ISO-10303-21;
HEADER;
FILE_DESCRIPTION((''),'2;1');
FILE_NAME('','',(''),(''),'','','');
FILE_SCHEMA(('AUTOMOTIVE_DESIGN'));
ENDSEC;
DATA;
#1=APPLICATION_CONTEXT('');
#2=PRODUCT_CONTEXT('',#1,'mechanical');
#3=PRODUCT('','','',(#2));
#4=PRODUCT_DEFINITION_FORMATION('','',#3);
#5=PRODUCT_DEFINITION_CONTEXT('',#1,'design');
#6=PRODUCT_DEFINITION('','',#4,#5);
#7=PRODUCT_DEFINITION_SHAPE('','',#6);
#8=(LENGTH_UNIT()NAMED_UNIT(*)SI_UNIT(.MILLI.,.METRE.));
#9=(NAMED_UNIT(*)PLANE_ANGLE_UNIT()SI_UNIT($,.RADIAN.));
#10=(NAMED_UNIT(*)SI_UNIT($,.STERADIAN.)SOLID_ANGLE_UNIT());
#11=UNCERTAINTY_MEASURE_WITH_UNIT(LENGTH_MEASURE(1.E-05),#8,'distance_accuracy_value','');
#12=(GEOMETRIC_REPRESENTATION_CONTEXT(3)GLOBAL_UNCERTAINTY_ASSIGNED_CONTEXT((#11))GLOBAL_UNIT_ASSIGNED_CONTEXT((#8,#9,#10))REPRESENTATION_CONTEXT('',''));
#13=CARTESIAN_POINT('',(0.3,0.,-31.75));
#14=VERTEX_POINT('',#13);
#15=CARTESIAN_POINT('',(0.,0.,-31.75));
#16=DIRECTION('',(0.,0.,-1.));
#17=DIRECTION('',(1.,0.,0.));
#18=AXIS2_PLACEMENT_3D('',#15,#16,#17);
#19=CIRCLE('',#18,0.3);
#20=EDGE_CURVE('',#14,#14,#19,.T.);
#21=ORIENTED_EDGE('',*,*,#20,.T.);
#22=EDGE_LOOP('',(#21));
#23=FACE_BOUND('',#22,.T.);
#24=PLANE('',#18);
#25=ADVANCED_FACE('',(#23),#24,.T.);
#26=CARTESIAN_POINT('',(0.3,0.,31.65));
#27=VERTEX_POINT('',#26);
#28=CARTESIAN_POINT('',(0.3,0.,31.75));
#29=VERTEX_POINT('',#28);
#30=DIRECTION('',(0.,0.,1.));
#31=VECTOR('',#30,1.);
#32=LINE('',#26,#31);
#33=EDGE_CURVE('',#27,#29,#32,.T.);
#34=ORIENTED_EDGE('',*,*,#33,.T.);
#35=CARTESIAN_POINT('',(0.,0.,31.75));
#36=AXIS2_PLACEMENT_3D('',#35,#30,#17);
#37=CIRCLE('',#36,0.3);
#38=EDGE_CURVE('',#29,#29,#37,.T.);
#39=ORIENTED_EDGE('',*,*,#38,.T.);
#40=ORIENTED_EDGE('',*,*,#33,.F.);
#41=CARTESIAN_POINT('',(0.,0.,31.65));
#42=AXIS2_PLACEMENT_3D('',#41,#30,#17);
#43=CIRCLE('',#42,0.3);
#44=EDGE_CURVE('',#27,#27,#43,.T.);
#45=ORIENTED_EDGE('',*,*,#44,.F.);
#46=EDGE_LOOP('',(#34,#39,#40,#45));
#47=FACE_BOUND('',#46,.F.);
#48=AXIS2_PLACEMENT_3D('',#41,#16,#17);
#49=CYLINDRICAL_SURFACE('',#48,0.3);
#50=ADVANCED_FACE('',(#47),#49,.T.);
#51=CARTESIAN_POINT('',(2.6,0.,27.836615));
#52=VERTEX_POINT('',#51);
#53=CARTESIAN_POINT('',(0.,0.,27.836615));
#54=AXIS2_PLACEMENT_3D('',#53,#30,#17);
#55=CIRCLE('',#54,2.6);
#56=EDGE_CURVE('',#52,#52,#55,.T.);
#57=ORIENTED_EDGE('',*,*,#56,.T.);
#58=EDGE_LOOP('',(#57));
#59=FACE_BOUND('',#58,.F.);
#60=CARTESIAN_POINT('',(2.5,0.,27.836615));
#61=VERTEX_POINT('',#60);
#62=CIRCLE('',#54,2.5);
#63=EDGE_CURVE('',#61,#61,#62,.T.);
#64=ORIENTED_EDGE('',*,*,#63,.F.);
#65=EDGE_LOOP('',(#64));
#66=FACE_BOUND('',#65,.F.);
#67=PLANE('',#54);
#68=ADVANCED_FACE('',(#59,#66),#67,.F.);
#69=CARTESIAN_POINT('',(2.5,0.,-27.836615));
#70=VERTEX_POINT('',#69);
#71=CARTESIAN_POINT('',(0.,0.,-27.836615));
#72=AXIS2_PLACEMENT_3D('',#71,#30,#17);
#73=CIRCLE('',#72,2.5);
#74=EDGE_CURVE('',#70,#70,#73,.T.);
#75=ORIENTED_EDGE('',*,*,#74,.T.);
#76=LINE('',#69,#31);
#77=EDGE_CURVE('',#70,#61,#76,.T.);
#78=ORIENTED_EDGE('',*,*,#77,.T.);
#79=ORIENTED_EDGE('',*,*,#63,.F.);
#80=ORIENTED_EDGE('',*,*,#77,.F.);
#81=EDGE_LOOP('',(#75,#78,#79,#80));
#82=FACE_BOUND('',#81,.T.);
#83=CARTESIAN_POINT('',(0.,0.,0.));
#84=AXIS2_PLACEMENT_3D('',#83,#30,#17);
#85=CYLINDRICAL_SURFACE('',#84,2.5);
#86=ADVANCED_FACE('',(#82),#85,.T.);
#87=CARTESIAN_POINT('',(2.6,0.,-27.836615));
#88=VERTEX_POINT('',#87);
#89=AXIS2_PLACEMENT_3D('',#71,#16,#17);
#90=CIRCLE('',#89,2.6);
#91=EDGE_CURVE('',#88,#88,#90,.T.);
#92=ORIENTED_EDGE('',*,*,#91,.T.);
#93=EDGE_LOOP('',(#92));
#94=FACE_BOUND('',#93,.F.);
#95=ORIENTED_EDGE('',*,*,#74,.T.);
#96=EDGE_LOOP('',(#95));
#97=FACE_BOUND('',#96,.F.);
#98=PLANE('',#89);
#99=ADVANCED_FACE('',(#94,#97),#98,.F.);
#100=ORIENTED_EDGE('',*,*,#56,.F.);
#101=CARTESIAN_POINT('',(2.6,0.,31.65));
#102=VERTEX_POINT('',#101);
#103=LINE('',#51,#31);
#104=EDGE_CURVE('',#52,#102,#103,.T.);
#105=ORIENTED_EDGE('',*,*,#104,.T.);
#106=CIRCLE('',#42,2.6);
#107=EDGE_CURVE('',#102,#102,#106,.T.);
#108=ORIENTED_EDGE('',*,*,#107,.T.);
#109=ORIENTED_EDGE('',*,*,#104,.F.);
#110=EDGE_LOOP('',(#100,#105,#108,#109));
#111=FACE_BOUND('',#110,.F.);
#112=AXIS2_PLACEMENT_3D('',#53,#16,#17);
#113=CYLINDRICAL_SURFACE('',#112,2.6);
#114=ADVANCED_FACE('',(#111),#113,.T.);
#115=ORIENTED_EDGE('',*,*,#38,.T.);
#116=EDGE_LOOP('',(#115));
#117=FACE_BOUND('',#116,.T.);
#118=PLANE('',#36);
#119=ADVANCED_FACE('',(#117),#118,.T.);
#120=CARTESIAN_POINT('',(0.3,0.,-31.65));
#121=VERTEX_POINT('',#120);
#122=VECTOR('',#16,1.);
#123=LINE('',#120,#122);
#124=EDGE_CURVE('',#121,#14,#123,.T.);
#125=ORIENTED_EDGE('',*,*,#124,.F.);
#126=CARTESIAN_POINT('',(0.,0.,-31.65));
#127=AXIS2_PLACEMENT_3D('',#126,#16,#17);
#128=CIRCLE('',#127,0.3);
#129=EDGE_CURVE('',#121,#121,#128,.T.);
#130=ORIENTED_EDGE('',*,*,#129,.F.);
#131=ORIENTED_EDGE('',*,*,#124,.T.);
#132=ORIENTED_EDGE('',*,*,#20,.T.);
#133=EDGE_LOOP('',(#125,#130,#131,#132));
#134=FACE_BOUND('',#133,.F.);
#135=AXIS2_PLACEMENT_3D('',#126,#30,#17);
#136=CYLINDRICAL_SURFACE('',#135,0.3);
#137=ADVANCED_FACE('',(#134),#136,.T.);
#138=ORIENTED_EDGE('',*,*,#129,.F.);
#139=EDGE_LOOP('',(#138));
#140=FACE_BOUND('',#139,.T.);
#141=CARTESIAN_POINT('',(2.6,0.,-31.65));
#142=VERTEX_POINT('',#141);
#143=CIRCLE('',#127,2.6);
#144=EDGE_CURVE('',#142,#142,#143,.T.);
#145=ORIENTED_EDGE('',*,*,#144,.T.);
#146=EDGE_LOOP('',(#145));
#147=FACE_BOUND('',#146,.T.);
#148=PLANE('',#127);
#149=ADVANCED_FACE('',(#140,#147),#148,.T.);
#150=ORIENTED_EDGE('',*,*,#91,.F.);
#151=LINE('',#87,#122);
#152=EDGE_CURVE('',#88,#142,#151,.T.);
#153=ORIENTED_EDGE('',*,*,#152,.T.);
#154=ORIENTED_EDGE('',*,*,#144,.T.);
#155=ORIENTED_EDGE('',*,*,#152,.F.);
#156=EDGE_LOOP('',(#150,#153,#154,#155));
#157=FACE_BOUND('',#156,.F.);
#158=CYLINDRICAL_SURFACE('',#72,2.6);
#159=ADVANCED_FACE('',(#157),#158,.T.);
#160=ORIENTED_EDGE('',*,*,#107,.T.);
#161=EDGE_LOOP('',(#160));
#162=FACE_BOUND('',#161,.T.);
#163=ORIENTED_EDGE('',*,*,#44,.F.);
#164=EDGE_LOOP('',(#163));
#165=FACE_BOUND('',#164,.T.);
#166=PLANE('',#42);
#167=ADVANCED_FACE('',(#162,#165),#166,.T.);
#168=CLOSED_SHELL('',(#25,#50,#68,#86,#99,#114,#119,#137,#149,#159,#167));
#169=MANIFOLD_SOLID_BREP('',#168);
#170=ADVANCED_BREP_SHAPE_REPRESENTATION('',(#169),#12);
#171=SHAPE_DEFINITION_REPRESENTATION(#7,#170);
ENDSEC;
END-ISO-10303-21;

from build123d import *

# Parameters (mm, degrees)
F0_R     = 2.5
F1_DEPTH = 27.836615
F2_R     = 2.6
F2_R_2   = 2.5
F3_DEPTH = 3.813385
F4_R     = 2.6
F4_R_2   = 2.5
F5_DEPTH = 3.813385
F6_R     = 0.3
F7_DEPTH = 0.1
F8_R     = 0.3
F9_DEPTH = 0.1


with BuildPart() as f1:
    # F0 (on Top) → F1 (new body, symmetric)
    with BuildSketch(Plane.XY):
        Circle(F0_R)
    extrude(amount=F1_DEPTH, both=True)

    # F2 (on face) → F3 (join)
    with BuildSketch(Plane.XY.offset(27.836615)):
        Circle(F2_R)
        Circle(F2_R_2, mode=Mode.SUBTRACT)
        Circle(F2_R_2)
    extrude(amount=F3_DEPTH)

    # F4 (on face) → F5 (join)
    with BuildSketch(Plane(origin=(0, 0, -27.836615), x_dir=(1, 0, 0), z_dir=(0, 0, -1))):
        Circle(F4_R)
        Circle(F4_R_2, mode=Mode.SUBTRACT)
        Circle(F4_R_2)
    extrude(amount=F5_DEPTH)

    # F6 (on face) → F7 (join)
    with BuildSketch(Plane(origin=(0, 0, -31.65), x_dir=(1, 0, 0), z_dir=(0, 0, -1))):
        Circle(F6_R)
    extrude(amount=F7_DEPTH)

    # F8 (on face) → F9 (join)
    with BuildSketch(Plane.XY.offset(31.65)):
        Circle(F8_R)
    extrude(amount=F9_DEPTH)


solid = f1.part
